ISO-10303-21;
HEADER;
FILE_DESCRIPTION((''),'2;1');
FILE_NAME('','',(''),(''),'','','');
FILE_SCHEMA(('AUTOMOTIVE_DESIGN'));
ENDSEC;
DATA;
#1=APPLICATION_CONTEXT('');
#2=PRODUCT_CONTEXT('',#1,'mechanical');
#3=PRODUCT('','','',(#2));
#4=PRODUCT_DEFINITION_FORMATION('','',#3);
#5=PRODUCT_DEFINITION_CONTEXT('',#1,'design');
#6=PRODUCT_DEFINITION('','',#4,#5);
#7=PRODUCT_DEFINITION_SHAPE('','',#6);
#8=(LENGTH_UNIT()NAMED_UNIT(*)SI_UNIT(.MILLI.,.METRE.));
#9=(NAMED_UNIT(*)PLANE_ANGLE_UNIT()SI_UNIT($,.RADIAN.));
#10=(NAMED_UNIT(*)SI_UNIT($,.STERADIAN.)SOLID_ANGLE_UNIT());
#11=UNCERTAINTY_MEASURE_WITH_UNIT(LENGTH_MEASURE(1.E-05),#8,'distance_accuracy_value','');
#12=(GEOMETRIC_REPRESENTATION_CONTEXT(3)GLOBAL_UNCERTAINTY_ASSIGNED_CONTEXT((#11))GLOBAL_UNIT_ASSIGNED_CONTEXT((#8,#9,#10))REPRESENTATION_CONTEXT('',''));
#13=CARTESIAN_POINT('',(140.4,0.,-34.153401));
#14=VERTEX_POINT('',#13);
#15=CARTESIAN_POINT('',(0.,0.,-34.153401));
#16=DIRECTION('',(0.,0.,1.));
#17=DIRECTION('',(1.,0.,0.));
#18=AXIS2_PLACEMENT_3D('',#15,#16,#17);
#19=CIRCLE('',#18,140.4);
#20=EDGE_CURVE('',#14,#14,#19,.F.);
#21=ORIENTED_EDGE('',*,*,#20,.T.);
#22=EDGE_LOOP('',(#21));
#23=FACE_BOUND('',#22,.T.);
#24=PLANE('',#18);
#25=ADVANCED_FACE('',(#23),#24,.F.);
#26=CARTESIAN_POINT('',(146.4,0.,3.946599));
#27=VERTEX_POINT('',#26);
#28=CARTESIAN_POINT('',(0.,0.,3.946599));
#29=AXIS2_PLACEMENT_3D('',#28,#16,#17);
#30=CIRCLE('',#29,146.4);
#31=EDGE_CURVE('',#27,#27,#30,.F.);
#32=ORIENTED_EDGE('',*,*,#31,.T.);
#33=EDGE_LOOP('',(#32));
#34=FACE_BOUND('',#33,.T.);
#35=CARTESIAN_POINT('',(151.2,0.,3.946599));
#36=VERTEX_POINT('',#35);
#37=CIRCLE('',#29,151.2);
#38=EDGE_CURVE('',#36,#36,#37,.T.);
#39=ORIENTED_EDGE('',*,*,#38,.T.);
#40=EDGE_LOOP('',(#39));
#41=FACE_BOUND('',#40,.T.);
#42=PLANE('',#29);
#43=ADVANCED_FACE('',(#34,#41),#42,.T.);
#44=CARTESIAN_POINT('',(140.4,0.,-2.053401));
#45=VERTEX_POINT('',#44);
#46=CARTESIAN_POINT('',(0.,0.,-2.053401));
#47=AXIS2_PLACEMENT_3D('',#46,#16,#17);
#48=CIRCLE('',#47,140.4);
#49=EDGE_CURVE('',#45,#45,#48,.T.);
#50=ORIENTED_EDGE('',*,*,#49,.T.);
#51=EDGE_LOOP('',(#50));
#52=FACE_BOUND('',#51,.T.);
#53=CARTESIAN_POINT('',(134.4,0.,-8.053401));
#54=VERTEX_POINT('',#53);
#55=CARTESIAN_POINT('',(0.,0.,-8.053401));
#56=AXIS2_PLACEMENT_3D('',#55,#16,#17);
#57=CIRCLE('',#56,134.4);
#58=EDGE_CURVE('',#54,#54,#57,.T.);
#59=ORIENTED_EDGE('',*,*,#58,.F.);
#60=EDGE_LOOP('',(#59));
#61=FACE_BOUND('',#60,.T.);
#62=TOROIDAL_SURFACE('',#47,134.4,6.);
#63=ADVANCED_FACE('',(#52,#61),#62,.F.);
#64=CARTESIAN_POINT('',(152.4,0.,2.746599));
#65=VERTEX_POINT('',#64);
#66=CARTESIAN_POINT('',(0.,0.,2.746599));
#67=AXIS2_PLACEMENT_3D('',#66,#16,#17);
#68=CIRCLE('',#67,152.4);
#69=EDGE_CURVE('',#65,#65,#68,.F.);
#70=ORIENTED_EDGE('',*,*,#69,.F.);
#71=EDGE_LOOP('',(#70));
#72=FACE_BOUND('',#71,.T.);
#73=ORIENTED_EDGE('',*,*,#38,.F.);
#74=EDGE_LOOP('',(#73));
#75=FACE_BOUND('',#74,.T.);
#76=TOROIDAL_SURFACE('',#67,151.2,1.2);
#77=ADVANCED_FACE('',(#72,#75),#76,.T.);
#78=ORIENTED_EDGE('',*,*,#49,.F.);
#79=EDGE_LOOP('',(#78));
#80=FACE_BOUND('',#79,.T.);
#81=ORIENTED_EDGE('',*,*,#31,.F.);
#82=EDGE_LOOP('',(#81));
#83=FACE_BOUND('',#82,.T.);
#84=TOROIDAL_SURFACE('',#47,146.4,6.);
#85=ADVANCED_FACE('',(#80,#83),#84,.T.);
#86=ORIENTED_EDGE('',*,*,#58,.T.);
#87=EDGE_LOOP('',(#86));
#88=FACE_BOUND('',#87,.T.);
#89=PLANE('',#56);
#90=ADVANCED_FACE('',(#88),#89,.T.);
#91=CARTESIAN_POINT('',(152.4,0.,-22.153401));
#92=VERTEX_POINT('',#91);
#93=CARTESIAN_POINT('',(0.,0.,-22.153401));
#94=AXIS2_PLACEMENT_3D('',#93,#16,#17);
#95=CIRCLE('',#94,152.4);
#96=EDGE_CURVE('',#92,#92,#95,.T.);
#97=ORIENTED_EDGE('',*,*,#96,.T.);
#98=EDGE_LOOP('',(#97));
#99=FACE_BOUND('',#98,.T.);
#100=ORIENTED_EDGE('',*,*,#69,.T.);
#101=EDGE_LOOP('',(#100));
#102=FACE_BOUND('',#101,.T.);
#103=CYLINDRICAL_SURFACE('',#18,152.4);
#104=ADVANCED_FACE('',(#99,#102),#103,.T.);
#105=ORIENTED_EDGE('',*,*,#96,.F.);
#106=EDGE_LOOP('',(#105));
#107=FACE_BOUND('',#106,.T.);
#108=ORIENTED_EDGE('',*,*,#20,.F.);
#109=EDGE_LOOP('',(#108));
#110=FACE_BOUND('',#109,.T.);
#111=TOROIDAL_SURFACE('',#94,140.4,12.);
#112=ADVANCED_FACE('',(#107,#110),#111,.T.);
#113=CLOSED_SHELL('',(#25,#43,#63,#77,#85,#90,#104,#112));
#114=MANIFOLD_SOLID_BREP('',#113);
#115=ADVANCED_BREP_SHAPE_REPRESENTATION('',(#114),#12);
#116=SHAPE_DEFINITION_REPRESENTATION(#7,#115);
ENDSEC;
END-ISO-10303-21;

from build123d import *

# Parameters (mm, degrees)
SKETCH1_R          = 127
BASE_EXTRUDE_DEPTH = 31.75
SKETCH3_R          = 117
CUT_EXTRUDE1_DEPTH = 10
FILLET1_R          = 5
FILLET2_R          = 5
FILLET3_R          = 1
FILLET4_R          = 10
SCALE2_SCALE       = 1.2


with BuildPart() as part:
    # Sketch1 → Base-Extrude (new body)
    with BuildSketch(Plane.XY):
        Circle(SKETCH1_R)
    extrude(amount=-BASE_EXTRUDE_DEPTH)

    # Sketch3 → Cut-Extrude1 (cut)
    with BuildSketch(Plane.XY):
        Circle(SKETCH3_R)
    extrude(amount=-CUT_EXTRUDE1_DEPTH, mode=Mode.SUBTRACT)

    # Fillet1
    fillet1_edges = [part.edges().sort_by_distance(p)[0] for p in [
        (-117, 0, 0),
    ]]
    fillet(fillet1_edges, radius=FILLET1_R)

    # Fillet2
    fillet2_edges = [part.edges().sort_by_distance(p)[0] for p in [
        (-117, 0, -10),
    ]]
    fillet(fillet2_edges, radius=FILLET2_R - 0.0001)  # a hair under: the kernel refuses the full size

    # Fillet3
    fillet3_edges = [part.edges().sort_by_distance(p)[0] for p in [
        (-127, 0, 0),
    ]]
    fillet(fillet3_edges, radius=FILLET3_R)

    # Fillet4
    fillet4_edges = [part.edges().sort_by_distance(p)[0] for p in [
        (-127, 0, -31.75),
    ]]
    fillet(fillet4_edges, radius=FILLET4_R)


with BuildPart() as part_1:
    # Scale2: scaled about (0, 0, -19.732997693)
    add(part.part.scale(SCALE2_SCALE).moved(Location((0, 0, 3.946599539))))


solid = part_1.part
